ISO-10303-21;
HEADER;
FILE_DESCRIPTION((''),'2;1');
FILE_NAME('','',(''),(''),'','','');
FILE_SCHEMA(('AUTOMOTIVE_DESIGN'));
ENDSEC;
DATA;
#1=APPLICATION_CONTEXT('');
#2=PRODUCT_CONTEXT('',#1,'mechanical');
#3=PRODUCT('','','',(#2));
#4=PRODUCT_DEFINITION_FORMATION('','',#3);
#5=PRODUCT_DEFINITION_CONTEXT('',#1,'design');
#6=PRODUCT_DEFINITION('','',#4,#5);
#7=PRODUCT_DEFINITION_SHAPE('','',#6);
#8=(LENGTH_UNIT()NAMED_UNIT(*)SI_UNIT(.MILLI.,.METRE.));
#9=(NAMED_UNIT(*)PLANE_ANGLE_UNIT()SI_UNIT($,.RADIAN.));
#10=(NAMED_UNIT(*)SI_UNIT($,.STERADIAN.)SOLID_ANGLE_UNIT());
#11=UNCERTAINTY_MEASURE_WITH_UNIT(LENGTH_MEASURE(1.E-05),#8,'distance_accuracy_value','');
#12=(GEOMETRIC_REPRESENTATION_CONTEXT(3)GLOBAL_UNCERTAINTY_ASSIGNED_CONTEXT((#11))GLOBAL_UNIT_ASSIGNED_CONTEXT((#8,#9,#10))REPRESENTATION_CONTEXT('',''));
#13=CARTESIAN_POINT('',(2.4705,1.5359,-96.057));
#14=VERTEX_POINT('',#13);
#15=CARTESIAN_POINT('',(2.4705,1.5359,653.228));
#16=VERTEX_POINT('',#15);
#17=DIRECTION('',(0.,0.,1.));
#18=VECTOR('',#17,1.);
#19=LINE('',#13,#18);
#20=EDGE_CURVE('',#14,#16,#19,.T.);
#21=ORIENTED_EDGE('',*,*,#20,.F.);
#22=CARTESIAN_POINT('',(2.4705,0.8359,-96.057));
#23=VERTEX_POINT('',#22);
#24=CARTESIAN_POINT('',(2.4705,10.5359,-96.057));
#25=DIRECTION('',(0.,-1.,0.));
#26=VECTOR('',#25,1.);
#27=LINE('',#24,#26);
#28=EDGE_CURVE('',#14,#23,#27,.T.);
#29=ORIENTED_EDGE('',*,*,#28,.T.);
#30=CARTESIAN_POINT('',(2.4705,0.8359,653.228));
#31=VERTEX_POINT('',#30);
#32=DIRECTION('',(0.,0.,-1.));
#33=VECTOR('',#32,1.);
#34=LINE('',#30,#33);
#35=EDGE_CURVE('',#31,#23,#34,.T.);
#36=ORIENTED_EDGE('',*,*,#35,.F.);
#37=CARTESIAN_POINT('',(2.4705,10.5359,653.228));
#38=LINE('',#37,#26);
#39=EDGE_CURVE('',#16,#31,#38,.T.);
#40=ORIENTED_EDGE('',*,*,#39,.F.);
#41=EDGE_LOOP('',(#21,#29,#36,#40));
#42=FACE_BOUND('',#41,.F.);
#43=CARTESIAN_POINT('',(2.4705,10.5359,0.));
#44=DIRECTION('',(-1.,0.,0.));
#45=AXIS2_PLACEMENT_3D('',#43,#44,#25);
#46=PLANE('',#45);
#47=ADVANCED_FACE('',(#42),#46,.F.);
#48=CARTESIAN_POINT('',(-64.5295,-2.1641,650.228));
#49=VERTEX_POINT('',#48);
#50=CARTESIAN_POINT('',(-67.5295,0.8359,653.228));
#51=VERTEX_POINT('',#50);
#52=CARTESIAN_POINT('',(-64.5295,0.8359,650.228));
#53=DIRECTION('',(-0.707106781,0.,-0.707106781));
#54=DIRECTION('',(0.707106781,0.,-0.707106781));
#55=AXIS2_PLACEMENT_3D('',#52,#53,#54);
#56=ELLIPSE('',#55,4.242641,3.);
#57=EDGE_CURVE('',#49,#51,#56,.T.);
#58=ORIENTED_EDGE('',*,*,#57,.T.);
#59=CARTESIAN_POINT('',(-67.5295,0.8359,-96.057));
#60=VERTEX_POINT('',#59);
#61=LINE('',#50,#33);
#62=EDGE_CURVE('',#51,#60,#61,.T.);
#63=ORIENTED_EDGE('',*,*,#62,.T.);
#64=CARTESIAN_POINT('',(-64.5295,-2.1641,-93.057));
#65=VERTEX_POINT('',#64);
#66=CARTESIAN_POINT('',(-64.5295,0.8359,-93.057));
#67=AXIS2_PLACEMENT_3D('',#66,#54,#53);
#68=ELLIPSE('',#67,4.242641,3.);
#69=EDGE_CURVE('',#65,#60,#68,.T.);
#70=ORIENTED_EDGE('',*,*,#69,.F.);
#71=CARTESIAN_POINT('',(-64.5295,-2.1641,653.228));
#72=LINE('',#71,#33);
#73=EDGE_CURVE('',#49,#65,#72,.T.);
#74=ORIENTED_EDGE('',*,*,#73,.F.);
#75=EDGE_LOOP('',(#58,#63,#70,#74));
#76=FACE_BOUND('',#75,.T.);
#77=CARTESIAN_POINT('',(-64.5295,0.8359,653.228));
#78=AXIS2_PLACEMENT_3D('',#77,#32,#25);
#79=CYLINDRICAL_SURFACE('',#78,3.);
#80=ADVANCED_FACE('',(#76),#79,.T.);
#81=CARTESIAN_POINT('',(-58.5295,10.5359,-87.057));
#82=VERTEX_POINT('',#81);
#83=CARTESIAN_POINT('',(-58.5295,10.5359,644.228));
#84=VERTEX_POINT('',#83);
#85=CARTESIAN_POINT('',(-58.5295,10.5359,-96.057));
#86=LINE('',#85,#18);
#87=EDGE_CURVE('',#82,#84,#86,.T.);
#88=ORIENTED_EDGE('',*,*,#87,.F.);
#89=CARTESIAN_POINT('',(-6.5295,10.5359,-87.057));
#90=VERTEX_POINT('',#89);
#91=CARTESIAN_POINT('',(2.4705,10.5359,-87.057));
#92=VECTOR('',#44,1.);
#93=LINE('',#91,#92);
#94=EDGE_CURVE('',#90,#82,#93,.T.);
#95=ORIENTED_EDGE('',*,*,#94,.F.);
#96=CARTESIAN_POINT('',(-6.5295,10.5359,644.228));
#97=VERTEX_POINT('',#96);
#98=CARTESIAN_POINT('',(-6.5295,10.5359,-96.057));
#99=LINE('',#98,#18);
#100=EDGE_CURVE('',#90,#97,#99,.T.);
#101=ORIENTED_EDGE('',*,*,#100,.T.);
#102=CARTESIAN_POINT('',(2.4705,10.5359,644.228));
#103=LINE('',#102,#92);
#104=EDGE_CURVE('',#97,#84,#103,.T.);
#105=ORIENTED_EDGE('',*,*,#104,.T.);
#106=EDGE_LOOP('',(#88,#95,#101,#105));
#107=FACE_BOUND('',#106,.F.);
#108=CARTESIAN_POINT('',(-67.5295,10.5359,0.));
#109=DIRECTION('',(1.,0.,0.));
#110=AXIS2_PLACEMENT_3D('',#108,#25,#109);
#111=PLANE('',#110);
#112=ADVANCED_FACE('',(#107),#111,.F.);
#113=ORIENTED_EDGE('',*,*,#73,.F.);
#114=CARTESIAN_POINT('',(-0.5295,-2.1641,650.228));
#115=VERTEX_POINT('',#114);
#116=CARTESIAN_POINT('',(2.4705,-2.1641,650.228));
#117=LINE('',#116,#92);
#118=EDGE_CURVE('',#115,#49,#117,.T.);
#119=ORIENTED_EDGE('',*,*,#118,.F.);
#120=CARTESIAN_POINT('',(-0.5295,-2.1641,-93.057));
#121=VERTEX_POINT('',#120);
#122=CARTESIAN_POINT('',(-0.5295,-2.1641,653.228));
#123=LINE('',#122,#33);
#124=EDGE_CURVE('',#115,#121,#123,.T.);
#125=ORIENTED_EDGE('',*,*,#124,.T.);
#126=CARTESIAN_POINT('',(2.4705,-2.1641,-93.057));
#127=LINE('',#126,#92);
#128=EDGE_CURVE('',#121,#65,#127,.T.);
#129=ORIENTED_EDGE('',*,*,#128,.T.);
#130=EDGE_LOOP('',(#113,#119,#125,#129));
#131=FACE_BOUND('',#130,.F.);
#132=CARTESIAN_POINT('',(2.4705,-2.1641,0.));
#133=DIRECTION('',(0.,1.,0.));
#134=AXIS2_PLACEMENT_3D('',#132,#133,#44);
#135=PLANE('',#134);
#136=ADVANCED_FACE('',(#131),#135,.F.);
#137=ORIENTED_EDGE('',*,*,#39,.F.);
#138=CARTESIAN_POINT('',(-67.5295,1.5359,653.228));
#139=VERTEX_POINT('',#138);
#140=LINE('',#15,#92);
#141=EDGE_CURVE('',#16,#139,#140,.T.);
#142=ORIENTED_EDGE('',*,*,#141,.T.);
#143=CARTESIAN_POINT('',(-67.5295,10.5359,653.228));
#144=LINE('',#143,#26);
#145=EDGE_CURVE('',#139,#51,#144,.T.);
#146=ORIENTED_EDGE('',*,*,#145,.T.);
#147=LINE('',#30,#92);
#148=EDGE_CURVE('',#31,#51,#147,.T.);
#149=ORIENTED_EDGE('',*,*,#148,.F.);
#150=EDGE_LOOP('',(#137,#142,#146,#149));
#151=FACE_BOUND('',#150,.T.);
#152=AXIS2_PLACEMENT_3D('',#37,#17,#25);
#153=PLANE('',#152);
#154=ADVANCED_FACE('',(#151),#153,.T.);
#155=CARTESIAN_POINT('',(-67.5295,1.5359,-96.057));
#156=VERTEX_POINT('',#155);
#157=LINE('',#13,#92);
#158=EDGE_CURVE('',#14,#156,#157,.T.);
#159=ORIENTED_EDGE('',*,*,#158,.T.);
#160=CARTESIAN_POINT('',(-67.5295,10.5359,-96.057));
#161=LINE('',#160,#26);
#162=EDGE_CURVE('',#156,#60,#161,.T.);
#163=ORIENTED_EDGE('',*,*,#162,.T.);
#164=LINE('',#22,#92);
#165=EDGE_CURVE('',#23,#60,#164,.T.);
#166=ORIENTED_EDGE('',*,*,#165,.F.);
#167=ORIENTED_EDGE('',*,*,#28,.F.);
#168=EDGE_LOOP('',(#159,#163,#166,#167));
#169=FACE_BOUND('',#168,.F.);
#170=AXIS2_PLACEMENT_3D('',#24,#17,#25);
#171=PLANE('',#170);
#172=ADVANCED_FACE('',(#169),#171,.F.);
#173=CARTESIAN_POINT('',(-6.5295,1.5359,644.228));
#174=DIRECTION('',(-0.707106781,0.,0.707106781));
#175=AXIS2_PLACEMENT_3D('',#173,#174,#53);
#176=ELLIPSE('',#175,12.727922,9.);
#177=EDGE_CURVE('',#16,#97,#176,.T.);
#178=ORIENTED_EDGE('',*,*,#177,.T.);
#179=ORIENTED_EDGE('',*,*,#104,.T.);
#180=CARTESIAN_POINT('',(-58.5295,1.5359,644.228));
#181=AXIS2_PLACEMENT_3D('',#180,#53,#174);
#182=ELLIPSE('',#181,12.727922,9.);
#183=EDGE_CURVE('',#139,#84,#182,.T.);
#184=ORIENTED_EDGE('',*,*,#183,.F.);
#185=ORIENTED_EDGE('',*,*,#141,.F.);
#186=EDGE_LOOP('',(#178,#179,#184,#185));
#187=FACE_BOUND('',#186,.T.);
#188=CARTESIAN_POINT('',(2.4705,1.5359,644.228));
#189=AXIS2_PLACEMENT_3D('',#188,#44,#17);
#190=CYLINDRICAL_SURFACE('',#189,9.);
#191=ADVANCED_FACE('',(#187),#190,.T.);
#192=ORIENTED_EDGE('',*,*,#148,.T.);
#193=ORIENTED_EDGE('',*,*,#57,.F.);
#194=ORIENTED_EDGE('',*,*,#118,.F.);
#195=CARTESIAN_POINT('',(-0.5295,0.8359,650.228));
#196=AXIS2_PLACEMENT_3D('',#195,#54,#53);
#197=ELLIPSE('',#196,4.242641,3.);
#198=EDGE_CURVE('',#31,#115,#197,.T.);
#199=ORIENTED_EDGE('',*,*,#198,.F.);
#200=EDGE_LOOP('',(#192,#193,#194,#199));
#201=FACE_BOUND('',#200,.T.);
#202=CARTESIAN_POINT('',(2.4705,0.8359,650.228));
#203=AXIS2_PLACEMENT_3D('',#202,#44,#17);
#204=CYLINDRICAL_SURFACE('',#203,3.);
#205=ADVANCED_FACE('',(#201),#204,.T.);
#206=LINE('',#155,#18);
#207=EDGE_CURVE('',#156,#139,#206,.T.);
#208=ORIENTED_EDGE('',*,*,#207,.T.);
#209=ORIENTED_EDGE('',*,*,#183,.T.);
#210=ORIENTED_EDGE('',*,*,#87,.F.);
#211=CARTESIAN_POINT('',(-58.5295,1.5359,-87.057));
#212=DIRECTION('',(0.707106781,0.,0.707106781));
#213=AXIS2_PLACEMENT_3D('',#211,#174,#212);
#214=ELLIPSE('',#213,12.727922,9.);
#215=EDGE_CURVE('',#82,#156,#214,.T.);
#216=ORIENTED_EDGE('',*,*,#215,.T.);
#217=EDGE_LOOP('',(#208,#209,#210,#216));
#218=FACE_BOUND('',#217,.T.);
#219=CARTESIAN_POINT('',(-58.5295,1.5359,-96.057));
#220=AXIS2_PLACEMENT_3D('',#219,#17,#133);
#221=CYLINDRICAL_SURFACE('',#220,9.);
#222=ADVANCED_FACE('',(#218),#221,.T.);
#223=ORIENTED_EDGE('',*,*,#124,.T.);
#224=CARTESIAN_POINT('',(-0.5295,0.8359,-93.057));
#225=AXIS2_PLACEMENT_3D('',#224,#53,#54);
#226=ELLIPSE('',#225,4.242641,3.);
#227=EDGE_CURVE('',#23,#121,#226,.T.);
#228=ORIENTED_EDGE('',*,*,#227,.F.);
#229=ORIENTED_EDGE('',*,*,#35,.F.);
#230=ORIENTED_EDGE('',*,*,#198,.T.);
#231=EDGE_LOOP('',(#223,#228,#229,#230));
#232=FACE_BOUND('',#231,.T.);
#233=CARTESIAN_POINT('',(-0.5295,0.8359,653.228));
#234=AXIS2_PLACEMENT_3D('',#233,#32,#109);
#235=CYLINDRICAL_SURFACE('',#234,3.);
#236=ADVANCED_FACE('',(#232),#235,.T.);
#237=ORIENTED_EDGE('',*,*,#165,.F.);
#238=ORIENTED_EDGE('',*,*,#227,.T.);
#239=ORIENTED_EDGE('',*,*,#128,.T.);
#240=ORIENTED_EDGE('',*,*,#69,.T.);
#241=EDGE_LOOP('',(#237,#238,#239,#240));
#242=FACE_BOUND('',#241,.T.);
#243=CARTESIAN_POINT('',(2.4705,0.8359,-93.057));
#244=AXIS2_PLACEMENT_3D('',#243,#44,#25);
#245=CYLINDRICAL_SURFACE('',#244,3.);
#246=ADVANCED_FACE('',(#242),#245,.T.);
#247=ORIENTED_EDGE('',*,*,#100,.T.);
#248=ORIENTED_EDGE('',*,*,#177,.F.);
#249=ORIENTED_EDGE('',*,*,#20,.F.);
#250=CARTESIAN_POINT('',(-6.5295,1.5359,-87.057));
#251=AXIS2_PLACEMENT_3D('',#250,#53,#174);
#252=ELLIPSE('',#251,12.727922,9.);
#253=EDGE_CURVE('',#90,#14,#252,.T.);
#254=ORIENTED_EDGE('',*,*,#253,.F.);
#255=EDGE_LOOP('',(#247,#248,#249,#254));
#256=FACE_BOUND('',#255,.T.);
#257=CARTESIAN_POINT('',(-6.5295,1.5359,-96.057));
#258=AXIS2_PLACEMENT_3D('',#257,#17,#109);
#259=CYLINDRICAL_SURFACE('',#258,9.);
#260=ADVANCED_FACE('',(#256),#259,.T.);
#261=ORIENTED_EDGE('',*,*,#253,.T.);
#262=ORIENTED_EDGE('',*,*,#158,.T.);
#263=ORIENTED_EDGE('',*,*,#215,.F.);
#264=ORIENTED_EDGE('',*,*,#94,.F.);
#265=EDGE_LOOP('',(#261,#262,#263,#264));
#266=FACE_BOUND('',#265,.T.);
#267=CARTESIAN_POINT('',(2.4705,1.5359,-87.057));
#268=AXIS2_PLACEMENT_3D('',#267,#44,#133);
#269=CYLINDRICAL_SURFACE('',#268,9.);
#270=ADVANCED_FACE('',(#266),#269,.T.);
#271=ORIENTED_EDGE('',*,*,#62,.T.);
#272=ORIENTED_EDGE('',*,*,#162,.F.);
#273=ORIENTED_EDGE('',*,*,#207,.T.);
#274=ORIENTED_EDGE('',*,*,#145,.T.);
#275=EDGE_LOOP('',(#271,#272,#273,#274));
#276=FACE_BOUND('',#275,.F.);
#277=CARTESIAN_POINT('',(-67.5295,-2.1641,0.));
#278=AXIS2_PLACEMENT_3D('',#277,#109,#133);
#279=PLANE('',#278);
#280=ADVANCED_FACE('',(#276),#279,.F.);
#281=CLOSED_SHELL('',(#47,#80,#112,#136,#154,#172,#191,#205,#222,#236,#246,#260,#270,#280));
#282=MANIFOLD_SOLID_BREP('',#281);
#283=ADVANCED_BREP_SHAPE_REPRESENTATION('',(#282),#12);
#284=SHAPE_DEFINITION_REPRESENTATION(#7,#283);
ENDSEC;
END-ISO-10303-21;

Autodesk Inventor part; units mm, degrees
ref_plane "YZ Plane" through (0, 0, 0) normal (1, 0, 0) x (0, 1, 0)
ref_plane "XZ Plane" through (0, 0, 0) normal (0, 1, 0) x (-1, 0, 0)
ref_plane "XY Plane" through (0, 0, 0) normal (0, 0, 1) x (1, 0, 0)
sketch "Sketch1" plane through (0, 0, 0) normal (0, 0, 1) x (1, 0, 0)
  line L0 (2.4705, -2.1641) -> (-67.5295, -2.1641)
  line L1 (-67.5295, -2.1641) -> (-67.5295, 10.5359)
  line L2 (-67.5295, 10.5359) -> (2.4705, 10.5359)
  line L3 (2.4705, 10.5359) -> (2.4705, -2.1641)
  dimension "d0" = 12.7
  dimension "d1" = 70
extrude "Extrusion1" add sketch "Sketch1" along normal blind 567.2
sketch "Sketch2" plane through (2.4705, -2.1641, 0) normal (1, 0, 0) x (0, 0, -1)
  line L0 (-567.3829, 6.35) -> (0, 6.35) construction
  line L1 (0, 12.7) -> (-567.2, 12.7) construction
  line L2 (-567.2, 12.7) -> (-567.2, 0) construction
  point P0 (-543.6, 6.35)
  point P1 (-33.6, 6.35)
  point P2 (-133.6, 6.35)
  point P3 (-238.6, 6.35)
  point P4 (-338.6, 6.35)
  point P5 (-443.6, 6.35)
  dimension "d4" = 6.35
  dimension "d5" = 23.6
  dimension "d6" = 100
  dimension "d7" = 105
  dimension "d8" = 100
  dimension "d9" = 105
  dimension "d10" = 100
  dimension "d11" = 33.6
  dimension "d12" = 567.3829
hole "Hole1" [suppressed]
sketch "Sketch3" plane through (0, 0, 567.2) normal (0, 0, 1) x (1, 0, 0)
  line L0 (-67.5295, -2.1641) -> (-67.5295, 10.5359) projected
  line L1 (-67.5295, 10.5359) -> (2.4705, 10.5359) projected
  line L2 (2.4705, -2.1641) -> (-67.5295, -2.1641) projected
  line L3 (2.4705, 10.5359) -> (2.4705, -2.1641) projected
extrude "Extrusion2" add sketch "Sketch3" along normal blind 150
sketch "Sketch4" plane through (0, 0, 0) normal (0, 0, -1) x (-1, 0, 0)
  line L0 (-2.4705, -2.1641) -> (67.5295, -2.1641) projected
  line L1 (67.5295, -2.1641) -> (67.5295, 10.5359) projected
  line L2 (67.5295, 10.5359) -> (-2.4705, 10.5359) projected
  line L3 (-2.4705, 10.5359) -> (-2.4705, -2.1641) projected
extrude "Extrusion3" add sketch "Sketch4" along normal blind 150
sketch "Sketch5" plane through (2.4705, -2.1641, 717.2) normal (1, 0, 0) x (0, 0, -1)
  circle A0 centre (73.972, 6.35) radius 3.9687 projected
  circle A1 centre (113.972, 6.35) radius 3.9687 projected
  circle A2 centre (748.257, 6.35) radius 3.9687 projected
  circle A3 centre (798.257, 6.35) radius 3.9687 projected
hole "Hole2" [suppressed]
sketch "Sketch6" plane through (2.4705, -2.1641, 717.2) normal (1, 0, 0) x (0, 0, -1)
  line L0 (867.2, 0) -> (0, 0) projected
  line L1 (0, 12.7) -> (0, 0) projected
  line L2 (0, 12.7) -> (867.2, 12.7) projected
  line L3 (63.972, 12.7) -> (63.972, 0)
  line L4 (63.972, 12.7) -> (0, 12.7)
  line L5 (0, 0) -> (63.972, 0)
  line L6 (0, 0) -> (0, 12.7)
  circle A0 centre (73.972, 6.35) radius 3.9687 projected
  dimension "d31" = 10
extrude "Extrusion4" cut sketch "Sketch6" against normal blind 70 contours L0 L1 L2 L3
sketch "Sketch7" plane through (2.4705, -2.1641, 653.228) normal (1, 0, 0) x (0, 0, -1)
  line L0 (803.228, 0) -> (0, 0) projected
  line L1 (0, 12.7) -> (803.228, 12.7) projected
  line L2 (803.228, 0) -> (803.228, 12.7) projected
  circle A0 centre (734.285, 6.35) radius 3.9687 projected
  line L3 (749.285, 12.7) -> (749.285, 0)
  line L4 (749.285, 0) -> (803.228, 0)
  line L5 (803.228, 1.1687) -> (803.228, 12.7)
  line L6 (803.228, 12.7) -> (749.285, 12.7)
  dimension "d34" = 15
extrude "Extrusion5" cut sketch "Sketch7" against normal blind 70 contours L0 L3 L1 L2
fillet "Fillet1" radius 3 4 edges at (2.4705, -2.1641, 278.5855) (-32.5295, -2.1641, -96.057) (-67.5295, -2.1641, 278.5855) (-32.5295, -2.1641, 653.228)
fillet "Fillet2" radius 9 4 edges at (-32.5295, 10.5359, 653.228) (-67.5295, 10.5359, 278.5855) (-32.5295, 10.5359, -96.057) (2.4705, 10.5359, 278.5855)
sketch "Sketch8" plane through (-67.5295, 0.8359, 238.6) normal (-1, 0, 0) x (0, 0, 1)
  line L0 (38.016, -32.096) -> (38.016, 13.904) projected
  line L1 (405.628, 9.7) -> (-325.657, 9.7) projected
  line L2 (38.016, 3.35) -> (67.7675, 3.35) construction
  line L3 (49.521, 11.9848) -> (49.521, 0.9719) construction
  point P0 (49.521, 3.35)
  dimension "d39" = 11.505
  dimension "d40" = 6.35
hole "Hole3" [suppressed]
sketch "Sketch9" plane through (2.4705, 0.8359, 338.6) normal (1, 0, 0) x (0, 0, -1)
  arc A0 (49.011, 3.658) -> (51.947, 3.658) centre (50.479, 3.35) ccw projected
hole "Hole4" [suppressed]
ref_plane "Work Plane1" through (-32.5295, -2.1641, 650.228) normal (-1, 0, 0) x (0, 0.9041723, -0.427168)
properties part number "Version 2 field plate"
